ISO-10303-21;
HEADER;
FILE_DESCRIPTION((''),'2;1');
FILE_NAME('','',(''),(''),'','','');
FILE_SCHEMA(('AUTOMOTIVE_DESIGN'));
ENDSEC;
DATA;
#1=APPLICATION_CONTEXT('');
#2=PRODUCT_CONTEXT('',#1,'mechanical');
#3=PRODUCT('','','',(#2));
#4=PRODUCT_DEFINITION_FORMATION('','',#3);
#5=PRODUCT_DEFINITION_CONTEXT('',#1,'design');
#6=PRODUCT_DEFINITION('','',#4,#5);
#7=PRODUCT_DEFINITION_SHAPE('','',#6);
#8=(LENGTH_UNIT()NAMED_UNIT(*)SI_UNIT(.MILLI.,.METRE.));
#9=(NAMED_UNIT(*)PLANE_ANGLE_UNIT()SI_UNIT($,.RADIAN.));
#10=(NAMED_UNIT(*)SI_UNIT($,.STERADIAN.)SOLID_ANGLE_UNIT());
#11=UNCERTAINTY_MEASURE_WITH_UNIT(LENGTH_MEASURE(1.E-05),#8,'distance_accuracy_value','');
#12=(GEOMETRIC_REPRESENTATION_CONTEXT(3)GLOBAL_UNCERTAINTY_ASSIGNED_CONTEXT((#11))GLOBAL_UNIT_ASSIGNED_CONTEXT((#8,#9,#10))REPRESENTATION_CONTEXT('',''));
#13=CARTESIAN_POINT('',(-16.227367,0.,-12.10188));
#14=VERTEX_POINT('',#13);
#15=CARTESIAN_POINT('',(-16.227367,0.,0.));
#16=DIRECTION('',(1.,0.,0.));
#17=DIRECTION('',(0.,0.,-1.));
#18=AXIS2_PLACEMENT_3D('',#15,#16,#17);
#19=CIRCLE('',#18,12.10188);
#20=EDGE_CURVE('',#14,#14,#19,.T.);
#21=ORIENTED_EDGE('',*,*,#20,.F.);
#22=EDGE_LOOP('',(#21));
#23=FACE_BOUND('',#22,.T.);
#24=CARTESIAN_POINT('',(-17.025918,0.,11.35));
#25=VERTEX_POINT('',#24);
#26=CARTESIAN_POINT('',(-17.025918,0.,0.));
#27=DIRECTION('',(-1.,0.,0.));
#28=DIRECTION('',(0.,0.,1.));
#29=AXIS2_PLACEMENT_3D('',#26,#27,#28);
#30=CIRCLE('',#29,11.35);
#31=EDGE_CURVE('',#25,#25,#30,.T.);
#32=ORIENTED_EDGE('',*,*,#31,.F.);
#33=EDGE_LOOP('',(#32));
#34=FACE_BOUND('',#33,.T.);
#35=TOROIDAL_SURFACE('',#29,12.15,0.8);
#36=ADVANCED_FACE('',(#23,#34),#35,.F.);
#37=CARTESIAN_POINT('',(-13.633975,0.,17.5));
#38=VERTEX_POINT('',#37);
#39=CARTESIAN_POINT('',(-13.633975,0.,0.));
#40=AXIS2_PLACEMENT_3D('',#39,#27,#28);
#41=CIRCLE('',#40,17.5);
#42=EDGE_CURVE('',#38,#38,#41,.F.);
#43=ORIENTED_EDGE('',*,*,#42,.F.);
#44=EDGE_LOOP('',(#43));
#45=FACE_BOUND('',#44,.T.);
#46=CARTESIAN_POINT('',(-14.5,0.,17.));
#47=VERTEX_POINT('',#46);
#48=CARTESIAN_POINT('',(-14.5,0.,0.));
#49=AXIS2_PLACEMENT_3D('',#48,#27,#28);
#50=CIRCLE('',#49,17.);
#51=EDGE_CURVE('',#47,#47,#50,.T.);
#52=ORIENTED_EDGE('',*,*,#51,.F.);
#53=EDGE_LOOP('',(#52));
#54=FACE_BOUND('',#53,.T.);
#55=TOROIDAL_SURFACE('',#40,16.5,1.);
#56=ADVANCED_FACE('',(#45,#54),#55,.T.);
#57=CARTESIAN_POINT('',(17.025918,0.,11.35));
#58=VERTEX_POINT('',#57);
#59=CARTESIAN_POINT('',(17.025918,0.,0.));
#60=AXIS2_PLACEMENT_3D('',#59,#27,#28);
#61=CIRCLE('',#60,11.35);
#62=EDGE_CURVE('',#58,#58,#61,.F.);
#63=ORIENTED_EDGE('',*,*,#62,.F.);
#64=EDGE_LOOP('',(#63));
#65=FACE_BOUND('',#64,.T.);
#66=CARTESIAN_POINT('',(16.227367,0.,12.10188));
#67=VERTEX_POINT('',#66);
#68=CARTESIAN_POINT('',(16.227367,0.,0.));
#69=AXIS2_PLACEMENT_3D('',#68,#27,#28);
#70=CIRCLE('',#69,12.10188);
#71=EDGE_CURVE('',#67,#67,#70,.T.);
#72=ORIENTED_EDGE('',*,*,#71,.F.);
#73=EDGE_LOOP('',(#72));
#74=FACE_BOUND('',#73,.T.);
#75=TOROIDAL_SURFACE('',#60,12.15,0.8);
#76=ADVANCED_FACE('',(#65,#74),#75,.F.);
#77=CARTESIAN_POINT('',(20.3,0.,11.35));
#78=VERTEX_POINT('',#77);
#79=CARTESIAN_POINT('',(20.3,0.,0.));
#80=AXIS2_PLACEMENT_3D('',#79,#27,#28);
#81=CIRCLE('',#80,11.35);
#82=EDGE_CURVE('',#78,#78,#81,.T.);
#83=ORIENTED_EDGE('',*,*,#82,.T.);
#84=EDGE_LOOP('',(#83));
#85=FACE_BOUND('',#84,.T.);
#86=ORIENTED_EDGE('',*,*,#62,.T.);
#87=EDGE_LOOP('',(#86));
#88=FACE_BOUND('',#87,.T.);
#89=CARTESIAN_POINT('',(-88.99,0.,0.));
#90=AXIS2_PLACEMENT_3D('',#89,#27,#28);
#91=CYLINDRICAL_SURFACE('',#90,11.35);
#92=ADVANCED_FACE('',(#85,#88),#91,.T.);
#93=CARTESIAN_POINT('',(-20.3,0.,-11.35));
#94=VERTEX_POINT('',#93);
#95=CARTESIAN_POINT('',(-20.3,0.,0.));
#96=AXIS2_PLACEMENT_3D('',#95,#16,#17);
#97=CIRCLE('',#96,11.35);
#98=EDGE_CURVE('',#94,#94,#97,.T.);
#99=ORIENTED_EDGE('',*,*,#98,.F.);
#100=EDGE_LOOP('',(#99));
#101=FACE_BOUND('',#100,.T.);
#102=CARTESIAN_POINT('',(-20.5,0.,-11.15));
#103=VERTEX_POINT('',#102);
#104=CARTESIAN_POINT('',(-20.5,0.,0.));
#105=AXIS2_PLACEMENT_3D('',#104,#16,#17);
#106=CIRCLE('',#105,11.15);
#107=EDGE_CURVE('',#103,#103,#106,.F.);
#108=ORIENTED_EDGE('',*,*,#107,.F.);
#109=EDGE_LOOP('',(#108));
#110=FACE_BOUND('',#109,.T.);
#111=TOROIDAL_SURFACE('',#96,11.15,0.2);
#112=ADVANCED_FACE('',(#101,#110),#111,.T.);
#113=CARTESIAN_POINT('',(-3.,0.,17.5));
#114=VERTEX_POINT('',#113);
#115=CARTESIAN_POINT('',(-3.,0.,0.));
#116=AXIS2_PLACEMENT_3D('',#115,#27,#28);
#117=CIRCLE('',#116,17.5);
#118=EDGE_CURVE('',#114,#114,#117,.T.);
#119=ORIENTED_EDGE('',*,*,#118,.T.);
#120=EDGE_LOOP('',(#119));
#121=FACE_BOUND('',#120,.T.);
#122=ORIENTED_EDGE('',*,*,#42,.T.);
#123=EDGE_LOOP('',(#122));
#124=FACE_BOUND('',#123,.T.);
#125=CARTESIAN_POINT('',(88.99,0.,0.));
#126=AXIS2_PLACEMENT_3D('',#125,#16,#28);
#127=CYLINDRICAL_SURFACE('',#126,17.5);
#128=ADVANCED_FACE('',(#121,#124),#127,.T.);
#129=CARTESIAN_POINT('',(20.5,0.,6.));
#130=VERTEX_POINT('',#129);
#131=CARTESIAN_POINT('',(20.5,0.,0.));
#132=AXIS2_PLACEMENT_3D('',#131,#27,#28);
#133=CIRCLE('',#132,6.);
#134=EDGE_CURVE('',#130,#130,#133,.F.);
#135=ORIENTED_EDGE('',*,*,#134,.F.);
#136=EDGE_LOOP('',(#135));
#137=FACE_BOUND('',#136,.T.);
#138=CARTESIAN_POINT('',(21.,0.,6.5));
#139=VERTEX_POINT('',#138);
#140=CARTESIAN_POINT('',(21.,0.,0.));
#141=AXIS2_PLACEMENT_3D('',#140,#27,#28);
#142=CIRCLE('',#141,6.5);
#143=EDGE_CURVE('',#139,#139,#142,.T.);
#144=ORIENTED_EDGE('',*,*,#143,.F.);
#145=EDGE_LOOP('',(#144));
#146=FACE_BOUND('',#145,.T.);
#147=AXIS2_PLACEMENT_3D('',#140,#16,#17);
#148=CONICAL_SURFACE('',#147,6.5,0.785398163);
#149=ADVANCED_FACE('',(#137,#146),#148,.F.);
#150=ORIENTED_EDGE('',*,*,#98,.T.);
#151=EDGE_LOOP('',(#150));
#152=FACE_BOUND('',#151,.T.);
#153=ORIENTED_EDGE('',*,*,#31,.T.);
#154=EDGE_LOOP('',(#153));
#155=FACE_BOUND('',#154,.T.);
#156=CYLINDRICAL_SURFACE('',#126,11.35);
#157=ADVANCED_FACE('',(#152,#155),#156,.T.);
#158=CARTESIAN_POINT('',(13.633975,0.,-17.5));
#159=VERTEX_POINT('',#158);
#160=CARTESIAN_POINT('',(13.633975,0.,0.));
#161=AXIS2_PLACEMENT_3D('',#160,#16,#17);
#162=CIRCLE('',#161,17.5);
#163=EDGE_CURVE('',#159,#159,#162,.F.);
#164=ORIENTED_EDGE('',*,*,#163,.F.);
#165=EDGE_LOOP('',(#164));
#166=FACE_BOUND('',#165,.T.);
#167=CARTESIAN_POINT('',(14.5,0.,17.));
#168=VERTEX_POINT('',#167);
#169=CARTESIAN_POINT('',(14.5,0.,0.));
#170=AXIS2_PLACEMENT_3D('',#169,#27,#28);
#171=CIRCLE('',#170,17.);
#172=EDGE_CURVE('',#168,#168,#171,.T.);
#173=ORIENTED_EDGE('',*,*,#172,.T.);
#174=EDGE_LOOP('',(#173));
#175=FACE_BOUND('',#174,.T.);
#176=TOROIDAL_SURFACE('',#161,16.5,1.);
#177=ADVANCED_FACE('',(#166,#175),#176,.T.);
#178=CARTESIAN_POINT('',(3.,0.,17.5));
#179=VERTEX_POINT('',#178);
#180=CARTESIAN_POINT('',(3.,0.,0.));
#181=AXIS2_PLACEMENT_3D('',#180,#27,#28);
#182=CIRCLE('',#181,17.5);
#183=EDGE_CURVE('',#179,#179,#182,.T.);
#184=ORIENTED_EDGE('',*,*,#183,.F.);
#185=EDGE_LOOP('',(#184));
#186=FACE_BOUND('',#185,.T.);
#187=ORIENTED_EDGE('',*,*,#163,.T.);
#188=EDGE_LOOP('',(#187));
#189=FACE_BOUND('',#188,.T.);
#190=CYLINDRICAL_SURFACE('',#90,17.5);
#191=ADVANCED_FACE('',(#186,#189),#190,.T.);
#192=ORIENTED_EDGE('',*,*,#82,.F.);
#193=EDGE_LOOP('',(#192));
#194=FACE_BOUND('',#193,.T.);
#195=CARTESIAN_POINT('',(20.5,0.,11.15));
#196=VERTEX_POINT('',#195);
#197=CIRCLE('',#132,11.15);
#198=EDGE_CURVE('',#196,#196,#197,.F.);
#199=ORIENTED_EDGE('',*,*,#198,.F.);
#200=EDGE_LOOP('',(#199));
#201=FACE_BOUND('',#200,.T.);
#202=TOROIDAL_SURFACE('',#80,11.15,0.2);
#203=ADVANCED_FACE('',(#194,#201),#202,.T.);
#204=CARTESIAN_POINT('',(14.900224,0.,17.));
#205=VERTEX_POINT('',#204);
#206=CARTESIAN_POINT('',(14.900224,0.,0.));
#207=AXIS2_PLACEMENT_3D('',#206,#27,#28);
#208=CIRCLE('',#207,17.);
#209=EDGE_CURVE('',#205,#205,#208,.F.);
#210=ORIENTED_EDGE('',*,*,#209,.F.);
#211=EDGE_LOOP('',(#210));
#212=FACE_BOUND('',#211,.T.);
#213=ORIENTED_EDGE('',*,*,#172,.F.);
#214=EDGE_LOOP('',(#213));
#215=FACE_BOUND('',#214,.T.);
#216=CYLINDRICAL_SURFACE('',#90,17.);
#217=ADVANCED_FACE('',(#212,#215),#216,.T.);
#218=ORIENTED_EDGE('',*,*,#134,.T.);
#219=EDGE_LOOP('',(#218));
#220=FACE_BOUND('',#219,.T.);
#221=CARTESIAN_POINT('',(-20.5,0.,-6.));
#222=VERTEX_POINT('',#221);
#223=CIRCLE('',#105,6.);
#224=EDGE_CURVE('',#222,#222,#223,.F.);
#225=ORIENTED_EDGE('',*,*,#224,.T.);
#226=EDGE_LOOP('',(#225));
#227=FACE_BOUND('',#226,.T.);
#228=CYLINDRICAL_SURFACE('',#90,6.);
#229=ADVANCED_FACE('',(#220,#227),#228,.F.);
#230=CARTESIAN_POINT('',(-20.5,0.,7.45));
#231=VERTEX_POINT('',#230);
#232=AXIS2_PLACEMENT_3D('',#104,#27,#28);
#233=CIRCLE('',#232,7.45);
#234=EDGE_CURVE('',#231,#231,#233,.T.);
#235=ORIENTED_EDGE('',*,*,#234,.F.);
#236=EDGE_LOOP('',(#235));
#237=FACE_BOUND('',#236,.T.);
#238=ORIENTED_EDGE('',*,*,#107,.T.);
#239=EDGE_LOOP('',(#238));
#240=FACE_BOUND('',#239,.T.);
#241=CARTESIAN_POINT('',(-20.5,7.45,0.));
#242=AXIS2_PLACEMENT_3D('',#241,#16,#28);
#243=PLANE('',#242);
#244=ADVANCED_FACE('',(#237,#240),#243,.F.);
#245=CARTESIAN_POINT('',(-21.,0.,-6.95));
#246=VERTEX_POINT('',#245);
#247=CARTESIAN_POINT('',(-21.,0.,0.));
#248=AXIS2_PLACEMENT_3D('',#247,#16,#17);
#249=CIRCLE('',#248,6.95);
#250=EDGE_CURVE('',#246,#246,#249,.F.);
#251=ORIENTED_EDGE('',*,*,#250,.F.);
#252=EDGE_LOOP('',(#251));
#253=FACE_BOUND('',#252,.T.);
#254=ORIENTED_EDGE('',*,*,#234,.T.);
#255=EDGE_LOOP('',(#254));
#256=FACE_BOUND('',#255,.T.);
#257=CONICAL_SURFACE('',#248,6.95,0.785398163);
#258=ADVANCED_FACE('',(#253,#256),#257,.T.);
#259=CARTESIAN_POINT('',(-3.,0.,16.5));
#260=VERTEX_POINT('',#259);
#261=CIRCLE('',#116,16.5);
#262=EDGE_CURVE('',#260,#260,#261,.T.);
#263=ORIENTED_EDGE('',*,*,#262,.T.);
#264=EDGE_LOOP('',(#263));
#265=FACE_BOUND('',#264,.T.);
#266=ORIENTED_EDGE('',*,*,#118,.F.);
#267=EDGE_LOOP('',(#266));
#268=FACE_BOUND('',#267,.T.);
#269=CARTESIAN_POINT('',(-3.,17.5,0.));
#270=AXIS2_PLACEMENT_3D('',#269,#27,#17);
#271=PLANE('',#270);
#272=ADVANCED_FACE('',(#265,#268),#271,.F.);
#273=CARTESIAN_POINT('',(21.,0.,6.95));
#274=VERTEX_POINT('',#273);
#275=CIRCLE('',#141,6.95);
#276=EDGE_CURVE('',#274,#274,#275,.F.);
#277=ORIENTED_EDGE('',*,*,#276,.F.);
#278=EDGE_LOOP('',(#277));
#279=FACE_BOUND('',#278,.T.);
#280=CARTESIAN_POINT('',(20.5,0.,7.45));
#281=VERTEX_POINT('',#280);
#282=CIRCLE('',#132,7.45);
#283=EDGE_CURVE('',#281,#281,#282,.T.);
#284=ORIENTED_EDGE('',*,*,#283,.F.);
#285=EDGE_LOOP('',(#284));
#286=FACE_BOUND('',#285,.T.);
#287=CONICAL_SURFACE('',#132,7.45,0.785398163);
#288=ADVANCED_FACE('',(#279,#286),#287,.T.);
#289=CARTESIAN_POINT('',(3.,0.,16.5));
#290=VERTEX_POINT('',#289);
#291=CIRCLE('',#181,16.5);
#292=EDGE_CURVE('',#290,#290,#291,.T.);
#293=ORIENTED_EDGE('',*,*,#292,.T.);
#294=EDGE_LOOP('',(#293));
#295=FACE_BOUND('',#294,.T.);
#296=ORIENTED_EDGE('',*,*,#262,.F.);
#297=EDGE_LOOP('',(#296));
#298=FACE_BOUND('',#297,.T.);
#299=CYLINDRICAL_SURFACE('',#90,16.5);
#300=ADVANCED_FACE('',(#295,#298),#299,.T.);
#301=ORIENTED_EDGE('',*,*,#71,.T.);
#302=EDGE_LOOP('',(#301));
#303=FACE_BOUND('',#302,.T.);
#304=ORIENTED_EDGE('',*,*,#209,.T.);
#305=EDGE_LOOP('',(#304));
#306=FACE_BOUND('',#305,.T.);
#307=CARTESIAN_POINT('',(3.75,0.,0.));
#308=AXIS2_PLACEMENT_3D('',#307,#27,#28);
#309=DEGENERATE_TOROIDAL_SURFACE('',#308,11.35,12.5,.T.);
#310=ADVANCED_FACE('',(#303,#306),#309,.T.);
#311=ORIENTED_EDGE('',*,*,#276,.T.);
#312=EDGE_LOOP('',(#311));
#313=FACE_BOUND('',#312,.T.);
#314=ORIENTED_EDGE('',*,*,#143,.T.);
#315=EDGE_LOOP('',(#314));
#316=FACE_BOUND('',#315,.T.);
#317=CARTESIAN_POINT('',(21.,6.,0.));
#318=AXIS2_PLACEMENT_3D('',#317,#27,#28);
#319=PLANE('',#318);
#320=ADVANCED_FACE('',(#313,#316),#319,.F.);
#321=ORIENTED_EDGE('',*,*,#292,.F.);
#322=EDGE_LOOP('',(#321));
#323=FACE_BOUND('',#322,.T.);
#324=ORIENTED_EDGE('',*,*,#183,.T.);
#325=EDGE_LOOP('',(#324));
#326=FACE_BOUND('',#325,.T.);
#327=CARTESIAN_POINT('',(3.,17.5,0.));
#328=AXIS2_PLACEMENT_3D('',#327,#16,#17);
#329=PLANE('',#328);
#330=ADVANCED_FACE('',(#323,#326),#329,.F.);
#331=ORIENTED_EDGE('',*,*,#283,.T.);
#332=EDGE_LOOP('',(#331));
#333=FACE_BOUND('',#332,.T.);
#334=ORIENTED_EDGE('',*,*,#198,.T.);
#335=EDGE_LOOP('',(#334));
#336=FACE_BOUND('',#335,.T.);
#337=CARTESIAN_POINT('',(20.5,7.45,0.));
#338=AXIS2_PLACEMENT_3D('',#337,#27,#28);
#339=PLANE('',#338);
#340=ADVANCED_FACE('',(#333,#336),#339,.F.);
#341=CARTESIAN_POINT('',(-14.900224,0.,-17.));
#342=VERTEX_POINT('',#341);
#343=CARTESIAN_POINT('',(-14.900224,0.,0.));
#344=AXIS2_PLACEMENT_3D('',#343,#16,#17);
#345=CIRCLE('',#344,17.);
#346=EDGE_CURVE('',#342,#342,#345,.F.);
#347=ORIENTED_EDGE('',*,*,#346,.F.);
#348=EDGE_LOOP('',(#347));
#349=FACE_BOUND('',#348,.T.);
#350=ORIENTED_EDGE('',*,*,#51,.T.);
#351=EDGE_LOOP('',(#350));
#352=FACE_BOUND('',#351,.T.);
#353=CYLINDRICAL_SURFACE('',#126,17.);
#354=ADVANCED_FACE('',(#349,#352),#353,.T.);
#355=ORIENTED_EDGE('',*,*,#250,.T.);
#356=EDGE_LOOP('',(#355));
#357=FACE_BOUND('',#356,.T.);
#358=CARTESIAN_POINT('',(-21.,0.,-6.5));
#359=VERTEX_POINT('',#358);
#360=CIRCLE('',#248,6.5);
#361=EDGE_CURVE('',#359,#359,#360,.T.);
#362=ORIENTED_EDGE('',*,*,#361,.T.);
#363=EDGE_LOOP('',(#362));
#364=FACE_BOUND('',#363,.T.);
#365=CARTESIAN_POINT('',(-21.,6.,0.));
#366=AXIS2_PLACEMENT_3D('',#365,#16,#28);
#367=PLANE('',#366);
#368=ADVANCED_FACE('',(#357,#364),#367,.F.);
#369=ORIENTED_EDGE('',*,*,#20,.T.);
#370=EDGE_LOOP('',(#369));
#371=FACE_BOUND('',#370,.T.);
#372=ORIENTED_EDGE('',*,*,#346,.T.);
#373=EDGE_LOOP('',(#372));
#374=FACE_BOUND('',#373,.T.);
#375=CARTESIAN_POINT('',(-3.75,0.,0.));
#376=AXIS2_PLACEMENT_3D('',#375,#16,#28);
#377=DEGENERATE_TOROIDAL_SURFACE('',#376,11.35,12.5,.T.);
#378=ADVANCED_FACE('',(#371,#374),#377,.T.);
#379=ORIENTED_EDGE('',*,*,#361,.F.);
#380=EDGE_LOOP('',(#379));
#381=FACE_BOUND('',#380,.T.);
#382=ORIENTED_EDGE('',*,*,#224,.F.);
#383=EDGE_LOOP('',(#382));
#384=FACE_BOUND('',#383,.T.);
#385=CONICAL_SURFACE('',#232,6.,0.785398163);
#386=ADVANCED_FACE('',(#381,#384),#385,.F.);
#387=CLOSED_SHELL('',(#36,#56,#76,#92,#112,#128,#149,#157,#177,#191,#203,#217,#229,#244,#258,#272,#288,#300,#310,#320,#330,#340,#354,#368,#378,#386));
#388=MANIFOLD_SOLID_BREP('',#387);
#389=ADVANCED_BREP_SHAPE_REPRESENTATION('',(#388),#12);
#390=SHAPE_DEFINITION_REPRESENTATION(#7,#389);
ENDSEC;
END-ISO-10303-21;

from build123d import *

# Parameters (mm, degrees)
CHAMFER1_SIZE = 0.5
FILLET1_R     = 0.2
FILLET2_R     = 0.8
FILLET3_R     = 1


# Some blends are built 0.0001 mm under size
with BuildPart() as part:
    # Sketch1 → Revolve1 (revolve)
    with BuildSketch(Plane.XY, mode=Mode.PRIVATE) as revolve1_sk:
        Polygon((0, 6), (21, 6), (21, 7.45), (20.5, 7.45), (20.5, 11.35), (16.25, 11.35), (16.25, 17), (14.5, 17), (14.5, 17.5), (3, 17.5), (3, 16.5), (0, 16.5), align=None)
    revolve1 = revolve(revolve1_sk.sketch.rotate(Axis((-88.99, 0, 0), (1, 0, 0)), 90), axis=Axis((-88.99, 0, 0), (1, 0, 0)))

    # Sketch2 → Cut-Revolve1 (revolve, cut)
    with BuildSketch(Plane.XY, mode=Mode.PRIVATE) as cut_revolve1_sk:
        with BuildLine():
            Line((14.632439984, 17.5), (16.25, 17.5))
            Line((16.25, 17.5), (16.25, 11.35))
            ThreePointArc((16.25, 11.35), (15.838848163, 14.529583322), (14.632439984, 17.5))
        make_face()
    cut_revolve1 = revolve(cut_revolve1_sk.sketch.rotate(Axis((-88.99, 0, 0), (1, 0, 0)), 90), axis=Axis((-88.99, 0, 0), (1, 0, 0)), mode=Mode.SUBTRACT)

    # Mirror1: Revolve1, Cut-Revolve1 across plane
    add(revolve1.mirror(Plane(origin=(0, 0, 0), x_dir=(0, 0, 1), z_dir=(1, 0, 0))))
    add(cut_revolve1.mirror(Plane(origin=(0, 0, 0), x_dir=(0, 0, 1), z_dir=(1, 0, 0))), mode=Mode.SUBTRACT)

    # Chamfer1
    chamfer1_edges = [part.edges().sort_by_distance(p)[0] for p in [
        (21, 0, -7.45),
        (21, 0, -6),
        (-21, 0, -6),
        (-21, 0, -7.45),
    ]]
    chamfer(chamfer1_edges, length=CHAMFER1_SIZE - 0.0001)  # a hair under: the kernel refuses the full size

    # Fillet1
    fillet1_edges = [part.edges().sort_by_distance(p)[0] for p in [
        (20.5, 0, -11.35),
        (-20.5, 0, -11.35),
    ]]
    fillet(fillet1_edges, radius=FILLET1_R)

    # Fillet2
    fillet2_edges = [part.edges().sort_by_distance(p)[0] for p in [
        (16.25, 0, -11.35),
        (-16.25, 0, -11.35),
    ]]
    fillet(fillet2_edges, radius=FILLET2_R)

    # Fillet3
    # the kernel refuses this fillet: 1 mm, written as the material it takes off along each edge
    with BuildSketch(Plane(origin=(-14.5, 0, 0), x_dir=(0, 0, 1), z_dir=(0, 1, 0))) as fillet3_piece_1:
        with BuildLine():
            CenterArc((16.5, 0.866025404), FILLET3_R, 300, 60)
            Line((17, 0), (17.01, -0.017320508))
            ThreePointArc((17.01, -0.017320508), (17.25, -0.02), (17.5, -0.02))
            Line((17.5, -0.02), (17.52, 0))
            Line((17.52, 0), (17.52, 0.866025404))
            Line((17.52, 0.866025404), (17.5, 0.866025404))
        make_face()
    revolve(axis=Axis((-14.5, 0, 0), (1, 0, 0)), mode=Mode.SUBTRACT)
    with BuildSketch(Plane(origin=(14.5, 0, 0), x_dir=(0, 0, 1), z_dir=(0, 1, 0))) as fillet3_piece_2:
        with BuildLine():
            CenterArc((16.5, -0.866025404), FILLET3_R, 0, 60)
            Line((17.5, -0.866025404), (17.52, -0.866025404))
            Line((17.52, -0.866025404), (17.52, 0))
            Line((17.52, 0), (17.5, 0.02))
            ThreePointArc((17.5, 0.02), (17.25, 0.02), (17.01, 0.017320508))
            Line((17.01, 0.017320508), (17, 0))
        make_face()
    revolve(axis=Axis((14.5, 0, 0), (1, 0, 0)), mode=Mode.SUBTRACT)


solid = part.part
